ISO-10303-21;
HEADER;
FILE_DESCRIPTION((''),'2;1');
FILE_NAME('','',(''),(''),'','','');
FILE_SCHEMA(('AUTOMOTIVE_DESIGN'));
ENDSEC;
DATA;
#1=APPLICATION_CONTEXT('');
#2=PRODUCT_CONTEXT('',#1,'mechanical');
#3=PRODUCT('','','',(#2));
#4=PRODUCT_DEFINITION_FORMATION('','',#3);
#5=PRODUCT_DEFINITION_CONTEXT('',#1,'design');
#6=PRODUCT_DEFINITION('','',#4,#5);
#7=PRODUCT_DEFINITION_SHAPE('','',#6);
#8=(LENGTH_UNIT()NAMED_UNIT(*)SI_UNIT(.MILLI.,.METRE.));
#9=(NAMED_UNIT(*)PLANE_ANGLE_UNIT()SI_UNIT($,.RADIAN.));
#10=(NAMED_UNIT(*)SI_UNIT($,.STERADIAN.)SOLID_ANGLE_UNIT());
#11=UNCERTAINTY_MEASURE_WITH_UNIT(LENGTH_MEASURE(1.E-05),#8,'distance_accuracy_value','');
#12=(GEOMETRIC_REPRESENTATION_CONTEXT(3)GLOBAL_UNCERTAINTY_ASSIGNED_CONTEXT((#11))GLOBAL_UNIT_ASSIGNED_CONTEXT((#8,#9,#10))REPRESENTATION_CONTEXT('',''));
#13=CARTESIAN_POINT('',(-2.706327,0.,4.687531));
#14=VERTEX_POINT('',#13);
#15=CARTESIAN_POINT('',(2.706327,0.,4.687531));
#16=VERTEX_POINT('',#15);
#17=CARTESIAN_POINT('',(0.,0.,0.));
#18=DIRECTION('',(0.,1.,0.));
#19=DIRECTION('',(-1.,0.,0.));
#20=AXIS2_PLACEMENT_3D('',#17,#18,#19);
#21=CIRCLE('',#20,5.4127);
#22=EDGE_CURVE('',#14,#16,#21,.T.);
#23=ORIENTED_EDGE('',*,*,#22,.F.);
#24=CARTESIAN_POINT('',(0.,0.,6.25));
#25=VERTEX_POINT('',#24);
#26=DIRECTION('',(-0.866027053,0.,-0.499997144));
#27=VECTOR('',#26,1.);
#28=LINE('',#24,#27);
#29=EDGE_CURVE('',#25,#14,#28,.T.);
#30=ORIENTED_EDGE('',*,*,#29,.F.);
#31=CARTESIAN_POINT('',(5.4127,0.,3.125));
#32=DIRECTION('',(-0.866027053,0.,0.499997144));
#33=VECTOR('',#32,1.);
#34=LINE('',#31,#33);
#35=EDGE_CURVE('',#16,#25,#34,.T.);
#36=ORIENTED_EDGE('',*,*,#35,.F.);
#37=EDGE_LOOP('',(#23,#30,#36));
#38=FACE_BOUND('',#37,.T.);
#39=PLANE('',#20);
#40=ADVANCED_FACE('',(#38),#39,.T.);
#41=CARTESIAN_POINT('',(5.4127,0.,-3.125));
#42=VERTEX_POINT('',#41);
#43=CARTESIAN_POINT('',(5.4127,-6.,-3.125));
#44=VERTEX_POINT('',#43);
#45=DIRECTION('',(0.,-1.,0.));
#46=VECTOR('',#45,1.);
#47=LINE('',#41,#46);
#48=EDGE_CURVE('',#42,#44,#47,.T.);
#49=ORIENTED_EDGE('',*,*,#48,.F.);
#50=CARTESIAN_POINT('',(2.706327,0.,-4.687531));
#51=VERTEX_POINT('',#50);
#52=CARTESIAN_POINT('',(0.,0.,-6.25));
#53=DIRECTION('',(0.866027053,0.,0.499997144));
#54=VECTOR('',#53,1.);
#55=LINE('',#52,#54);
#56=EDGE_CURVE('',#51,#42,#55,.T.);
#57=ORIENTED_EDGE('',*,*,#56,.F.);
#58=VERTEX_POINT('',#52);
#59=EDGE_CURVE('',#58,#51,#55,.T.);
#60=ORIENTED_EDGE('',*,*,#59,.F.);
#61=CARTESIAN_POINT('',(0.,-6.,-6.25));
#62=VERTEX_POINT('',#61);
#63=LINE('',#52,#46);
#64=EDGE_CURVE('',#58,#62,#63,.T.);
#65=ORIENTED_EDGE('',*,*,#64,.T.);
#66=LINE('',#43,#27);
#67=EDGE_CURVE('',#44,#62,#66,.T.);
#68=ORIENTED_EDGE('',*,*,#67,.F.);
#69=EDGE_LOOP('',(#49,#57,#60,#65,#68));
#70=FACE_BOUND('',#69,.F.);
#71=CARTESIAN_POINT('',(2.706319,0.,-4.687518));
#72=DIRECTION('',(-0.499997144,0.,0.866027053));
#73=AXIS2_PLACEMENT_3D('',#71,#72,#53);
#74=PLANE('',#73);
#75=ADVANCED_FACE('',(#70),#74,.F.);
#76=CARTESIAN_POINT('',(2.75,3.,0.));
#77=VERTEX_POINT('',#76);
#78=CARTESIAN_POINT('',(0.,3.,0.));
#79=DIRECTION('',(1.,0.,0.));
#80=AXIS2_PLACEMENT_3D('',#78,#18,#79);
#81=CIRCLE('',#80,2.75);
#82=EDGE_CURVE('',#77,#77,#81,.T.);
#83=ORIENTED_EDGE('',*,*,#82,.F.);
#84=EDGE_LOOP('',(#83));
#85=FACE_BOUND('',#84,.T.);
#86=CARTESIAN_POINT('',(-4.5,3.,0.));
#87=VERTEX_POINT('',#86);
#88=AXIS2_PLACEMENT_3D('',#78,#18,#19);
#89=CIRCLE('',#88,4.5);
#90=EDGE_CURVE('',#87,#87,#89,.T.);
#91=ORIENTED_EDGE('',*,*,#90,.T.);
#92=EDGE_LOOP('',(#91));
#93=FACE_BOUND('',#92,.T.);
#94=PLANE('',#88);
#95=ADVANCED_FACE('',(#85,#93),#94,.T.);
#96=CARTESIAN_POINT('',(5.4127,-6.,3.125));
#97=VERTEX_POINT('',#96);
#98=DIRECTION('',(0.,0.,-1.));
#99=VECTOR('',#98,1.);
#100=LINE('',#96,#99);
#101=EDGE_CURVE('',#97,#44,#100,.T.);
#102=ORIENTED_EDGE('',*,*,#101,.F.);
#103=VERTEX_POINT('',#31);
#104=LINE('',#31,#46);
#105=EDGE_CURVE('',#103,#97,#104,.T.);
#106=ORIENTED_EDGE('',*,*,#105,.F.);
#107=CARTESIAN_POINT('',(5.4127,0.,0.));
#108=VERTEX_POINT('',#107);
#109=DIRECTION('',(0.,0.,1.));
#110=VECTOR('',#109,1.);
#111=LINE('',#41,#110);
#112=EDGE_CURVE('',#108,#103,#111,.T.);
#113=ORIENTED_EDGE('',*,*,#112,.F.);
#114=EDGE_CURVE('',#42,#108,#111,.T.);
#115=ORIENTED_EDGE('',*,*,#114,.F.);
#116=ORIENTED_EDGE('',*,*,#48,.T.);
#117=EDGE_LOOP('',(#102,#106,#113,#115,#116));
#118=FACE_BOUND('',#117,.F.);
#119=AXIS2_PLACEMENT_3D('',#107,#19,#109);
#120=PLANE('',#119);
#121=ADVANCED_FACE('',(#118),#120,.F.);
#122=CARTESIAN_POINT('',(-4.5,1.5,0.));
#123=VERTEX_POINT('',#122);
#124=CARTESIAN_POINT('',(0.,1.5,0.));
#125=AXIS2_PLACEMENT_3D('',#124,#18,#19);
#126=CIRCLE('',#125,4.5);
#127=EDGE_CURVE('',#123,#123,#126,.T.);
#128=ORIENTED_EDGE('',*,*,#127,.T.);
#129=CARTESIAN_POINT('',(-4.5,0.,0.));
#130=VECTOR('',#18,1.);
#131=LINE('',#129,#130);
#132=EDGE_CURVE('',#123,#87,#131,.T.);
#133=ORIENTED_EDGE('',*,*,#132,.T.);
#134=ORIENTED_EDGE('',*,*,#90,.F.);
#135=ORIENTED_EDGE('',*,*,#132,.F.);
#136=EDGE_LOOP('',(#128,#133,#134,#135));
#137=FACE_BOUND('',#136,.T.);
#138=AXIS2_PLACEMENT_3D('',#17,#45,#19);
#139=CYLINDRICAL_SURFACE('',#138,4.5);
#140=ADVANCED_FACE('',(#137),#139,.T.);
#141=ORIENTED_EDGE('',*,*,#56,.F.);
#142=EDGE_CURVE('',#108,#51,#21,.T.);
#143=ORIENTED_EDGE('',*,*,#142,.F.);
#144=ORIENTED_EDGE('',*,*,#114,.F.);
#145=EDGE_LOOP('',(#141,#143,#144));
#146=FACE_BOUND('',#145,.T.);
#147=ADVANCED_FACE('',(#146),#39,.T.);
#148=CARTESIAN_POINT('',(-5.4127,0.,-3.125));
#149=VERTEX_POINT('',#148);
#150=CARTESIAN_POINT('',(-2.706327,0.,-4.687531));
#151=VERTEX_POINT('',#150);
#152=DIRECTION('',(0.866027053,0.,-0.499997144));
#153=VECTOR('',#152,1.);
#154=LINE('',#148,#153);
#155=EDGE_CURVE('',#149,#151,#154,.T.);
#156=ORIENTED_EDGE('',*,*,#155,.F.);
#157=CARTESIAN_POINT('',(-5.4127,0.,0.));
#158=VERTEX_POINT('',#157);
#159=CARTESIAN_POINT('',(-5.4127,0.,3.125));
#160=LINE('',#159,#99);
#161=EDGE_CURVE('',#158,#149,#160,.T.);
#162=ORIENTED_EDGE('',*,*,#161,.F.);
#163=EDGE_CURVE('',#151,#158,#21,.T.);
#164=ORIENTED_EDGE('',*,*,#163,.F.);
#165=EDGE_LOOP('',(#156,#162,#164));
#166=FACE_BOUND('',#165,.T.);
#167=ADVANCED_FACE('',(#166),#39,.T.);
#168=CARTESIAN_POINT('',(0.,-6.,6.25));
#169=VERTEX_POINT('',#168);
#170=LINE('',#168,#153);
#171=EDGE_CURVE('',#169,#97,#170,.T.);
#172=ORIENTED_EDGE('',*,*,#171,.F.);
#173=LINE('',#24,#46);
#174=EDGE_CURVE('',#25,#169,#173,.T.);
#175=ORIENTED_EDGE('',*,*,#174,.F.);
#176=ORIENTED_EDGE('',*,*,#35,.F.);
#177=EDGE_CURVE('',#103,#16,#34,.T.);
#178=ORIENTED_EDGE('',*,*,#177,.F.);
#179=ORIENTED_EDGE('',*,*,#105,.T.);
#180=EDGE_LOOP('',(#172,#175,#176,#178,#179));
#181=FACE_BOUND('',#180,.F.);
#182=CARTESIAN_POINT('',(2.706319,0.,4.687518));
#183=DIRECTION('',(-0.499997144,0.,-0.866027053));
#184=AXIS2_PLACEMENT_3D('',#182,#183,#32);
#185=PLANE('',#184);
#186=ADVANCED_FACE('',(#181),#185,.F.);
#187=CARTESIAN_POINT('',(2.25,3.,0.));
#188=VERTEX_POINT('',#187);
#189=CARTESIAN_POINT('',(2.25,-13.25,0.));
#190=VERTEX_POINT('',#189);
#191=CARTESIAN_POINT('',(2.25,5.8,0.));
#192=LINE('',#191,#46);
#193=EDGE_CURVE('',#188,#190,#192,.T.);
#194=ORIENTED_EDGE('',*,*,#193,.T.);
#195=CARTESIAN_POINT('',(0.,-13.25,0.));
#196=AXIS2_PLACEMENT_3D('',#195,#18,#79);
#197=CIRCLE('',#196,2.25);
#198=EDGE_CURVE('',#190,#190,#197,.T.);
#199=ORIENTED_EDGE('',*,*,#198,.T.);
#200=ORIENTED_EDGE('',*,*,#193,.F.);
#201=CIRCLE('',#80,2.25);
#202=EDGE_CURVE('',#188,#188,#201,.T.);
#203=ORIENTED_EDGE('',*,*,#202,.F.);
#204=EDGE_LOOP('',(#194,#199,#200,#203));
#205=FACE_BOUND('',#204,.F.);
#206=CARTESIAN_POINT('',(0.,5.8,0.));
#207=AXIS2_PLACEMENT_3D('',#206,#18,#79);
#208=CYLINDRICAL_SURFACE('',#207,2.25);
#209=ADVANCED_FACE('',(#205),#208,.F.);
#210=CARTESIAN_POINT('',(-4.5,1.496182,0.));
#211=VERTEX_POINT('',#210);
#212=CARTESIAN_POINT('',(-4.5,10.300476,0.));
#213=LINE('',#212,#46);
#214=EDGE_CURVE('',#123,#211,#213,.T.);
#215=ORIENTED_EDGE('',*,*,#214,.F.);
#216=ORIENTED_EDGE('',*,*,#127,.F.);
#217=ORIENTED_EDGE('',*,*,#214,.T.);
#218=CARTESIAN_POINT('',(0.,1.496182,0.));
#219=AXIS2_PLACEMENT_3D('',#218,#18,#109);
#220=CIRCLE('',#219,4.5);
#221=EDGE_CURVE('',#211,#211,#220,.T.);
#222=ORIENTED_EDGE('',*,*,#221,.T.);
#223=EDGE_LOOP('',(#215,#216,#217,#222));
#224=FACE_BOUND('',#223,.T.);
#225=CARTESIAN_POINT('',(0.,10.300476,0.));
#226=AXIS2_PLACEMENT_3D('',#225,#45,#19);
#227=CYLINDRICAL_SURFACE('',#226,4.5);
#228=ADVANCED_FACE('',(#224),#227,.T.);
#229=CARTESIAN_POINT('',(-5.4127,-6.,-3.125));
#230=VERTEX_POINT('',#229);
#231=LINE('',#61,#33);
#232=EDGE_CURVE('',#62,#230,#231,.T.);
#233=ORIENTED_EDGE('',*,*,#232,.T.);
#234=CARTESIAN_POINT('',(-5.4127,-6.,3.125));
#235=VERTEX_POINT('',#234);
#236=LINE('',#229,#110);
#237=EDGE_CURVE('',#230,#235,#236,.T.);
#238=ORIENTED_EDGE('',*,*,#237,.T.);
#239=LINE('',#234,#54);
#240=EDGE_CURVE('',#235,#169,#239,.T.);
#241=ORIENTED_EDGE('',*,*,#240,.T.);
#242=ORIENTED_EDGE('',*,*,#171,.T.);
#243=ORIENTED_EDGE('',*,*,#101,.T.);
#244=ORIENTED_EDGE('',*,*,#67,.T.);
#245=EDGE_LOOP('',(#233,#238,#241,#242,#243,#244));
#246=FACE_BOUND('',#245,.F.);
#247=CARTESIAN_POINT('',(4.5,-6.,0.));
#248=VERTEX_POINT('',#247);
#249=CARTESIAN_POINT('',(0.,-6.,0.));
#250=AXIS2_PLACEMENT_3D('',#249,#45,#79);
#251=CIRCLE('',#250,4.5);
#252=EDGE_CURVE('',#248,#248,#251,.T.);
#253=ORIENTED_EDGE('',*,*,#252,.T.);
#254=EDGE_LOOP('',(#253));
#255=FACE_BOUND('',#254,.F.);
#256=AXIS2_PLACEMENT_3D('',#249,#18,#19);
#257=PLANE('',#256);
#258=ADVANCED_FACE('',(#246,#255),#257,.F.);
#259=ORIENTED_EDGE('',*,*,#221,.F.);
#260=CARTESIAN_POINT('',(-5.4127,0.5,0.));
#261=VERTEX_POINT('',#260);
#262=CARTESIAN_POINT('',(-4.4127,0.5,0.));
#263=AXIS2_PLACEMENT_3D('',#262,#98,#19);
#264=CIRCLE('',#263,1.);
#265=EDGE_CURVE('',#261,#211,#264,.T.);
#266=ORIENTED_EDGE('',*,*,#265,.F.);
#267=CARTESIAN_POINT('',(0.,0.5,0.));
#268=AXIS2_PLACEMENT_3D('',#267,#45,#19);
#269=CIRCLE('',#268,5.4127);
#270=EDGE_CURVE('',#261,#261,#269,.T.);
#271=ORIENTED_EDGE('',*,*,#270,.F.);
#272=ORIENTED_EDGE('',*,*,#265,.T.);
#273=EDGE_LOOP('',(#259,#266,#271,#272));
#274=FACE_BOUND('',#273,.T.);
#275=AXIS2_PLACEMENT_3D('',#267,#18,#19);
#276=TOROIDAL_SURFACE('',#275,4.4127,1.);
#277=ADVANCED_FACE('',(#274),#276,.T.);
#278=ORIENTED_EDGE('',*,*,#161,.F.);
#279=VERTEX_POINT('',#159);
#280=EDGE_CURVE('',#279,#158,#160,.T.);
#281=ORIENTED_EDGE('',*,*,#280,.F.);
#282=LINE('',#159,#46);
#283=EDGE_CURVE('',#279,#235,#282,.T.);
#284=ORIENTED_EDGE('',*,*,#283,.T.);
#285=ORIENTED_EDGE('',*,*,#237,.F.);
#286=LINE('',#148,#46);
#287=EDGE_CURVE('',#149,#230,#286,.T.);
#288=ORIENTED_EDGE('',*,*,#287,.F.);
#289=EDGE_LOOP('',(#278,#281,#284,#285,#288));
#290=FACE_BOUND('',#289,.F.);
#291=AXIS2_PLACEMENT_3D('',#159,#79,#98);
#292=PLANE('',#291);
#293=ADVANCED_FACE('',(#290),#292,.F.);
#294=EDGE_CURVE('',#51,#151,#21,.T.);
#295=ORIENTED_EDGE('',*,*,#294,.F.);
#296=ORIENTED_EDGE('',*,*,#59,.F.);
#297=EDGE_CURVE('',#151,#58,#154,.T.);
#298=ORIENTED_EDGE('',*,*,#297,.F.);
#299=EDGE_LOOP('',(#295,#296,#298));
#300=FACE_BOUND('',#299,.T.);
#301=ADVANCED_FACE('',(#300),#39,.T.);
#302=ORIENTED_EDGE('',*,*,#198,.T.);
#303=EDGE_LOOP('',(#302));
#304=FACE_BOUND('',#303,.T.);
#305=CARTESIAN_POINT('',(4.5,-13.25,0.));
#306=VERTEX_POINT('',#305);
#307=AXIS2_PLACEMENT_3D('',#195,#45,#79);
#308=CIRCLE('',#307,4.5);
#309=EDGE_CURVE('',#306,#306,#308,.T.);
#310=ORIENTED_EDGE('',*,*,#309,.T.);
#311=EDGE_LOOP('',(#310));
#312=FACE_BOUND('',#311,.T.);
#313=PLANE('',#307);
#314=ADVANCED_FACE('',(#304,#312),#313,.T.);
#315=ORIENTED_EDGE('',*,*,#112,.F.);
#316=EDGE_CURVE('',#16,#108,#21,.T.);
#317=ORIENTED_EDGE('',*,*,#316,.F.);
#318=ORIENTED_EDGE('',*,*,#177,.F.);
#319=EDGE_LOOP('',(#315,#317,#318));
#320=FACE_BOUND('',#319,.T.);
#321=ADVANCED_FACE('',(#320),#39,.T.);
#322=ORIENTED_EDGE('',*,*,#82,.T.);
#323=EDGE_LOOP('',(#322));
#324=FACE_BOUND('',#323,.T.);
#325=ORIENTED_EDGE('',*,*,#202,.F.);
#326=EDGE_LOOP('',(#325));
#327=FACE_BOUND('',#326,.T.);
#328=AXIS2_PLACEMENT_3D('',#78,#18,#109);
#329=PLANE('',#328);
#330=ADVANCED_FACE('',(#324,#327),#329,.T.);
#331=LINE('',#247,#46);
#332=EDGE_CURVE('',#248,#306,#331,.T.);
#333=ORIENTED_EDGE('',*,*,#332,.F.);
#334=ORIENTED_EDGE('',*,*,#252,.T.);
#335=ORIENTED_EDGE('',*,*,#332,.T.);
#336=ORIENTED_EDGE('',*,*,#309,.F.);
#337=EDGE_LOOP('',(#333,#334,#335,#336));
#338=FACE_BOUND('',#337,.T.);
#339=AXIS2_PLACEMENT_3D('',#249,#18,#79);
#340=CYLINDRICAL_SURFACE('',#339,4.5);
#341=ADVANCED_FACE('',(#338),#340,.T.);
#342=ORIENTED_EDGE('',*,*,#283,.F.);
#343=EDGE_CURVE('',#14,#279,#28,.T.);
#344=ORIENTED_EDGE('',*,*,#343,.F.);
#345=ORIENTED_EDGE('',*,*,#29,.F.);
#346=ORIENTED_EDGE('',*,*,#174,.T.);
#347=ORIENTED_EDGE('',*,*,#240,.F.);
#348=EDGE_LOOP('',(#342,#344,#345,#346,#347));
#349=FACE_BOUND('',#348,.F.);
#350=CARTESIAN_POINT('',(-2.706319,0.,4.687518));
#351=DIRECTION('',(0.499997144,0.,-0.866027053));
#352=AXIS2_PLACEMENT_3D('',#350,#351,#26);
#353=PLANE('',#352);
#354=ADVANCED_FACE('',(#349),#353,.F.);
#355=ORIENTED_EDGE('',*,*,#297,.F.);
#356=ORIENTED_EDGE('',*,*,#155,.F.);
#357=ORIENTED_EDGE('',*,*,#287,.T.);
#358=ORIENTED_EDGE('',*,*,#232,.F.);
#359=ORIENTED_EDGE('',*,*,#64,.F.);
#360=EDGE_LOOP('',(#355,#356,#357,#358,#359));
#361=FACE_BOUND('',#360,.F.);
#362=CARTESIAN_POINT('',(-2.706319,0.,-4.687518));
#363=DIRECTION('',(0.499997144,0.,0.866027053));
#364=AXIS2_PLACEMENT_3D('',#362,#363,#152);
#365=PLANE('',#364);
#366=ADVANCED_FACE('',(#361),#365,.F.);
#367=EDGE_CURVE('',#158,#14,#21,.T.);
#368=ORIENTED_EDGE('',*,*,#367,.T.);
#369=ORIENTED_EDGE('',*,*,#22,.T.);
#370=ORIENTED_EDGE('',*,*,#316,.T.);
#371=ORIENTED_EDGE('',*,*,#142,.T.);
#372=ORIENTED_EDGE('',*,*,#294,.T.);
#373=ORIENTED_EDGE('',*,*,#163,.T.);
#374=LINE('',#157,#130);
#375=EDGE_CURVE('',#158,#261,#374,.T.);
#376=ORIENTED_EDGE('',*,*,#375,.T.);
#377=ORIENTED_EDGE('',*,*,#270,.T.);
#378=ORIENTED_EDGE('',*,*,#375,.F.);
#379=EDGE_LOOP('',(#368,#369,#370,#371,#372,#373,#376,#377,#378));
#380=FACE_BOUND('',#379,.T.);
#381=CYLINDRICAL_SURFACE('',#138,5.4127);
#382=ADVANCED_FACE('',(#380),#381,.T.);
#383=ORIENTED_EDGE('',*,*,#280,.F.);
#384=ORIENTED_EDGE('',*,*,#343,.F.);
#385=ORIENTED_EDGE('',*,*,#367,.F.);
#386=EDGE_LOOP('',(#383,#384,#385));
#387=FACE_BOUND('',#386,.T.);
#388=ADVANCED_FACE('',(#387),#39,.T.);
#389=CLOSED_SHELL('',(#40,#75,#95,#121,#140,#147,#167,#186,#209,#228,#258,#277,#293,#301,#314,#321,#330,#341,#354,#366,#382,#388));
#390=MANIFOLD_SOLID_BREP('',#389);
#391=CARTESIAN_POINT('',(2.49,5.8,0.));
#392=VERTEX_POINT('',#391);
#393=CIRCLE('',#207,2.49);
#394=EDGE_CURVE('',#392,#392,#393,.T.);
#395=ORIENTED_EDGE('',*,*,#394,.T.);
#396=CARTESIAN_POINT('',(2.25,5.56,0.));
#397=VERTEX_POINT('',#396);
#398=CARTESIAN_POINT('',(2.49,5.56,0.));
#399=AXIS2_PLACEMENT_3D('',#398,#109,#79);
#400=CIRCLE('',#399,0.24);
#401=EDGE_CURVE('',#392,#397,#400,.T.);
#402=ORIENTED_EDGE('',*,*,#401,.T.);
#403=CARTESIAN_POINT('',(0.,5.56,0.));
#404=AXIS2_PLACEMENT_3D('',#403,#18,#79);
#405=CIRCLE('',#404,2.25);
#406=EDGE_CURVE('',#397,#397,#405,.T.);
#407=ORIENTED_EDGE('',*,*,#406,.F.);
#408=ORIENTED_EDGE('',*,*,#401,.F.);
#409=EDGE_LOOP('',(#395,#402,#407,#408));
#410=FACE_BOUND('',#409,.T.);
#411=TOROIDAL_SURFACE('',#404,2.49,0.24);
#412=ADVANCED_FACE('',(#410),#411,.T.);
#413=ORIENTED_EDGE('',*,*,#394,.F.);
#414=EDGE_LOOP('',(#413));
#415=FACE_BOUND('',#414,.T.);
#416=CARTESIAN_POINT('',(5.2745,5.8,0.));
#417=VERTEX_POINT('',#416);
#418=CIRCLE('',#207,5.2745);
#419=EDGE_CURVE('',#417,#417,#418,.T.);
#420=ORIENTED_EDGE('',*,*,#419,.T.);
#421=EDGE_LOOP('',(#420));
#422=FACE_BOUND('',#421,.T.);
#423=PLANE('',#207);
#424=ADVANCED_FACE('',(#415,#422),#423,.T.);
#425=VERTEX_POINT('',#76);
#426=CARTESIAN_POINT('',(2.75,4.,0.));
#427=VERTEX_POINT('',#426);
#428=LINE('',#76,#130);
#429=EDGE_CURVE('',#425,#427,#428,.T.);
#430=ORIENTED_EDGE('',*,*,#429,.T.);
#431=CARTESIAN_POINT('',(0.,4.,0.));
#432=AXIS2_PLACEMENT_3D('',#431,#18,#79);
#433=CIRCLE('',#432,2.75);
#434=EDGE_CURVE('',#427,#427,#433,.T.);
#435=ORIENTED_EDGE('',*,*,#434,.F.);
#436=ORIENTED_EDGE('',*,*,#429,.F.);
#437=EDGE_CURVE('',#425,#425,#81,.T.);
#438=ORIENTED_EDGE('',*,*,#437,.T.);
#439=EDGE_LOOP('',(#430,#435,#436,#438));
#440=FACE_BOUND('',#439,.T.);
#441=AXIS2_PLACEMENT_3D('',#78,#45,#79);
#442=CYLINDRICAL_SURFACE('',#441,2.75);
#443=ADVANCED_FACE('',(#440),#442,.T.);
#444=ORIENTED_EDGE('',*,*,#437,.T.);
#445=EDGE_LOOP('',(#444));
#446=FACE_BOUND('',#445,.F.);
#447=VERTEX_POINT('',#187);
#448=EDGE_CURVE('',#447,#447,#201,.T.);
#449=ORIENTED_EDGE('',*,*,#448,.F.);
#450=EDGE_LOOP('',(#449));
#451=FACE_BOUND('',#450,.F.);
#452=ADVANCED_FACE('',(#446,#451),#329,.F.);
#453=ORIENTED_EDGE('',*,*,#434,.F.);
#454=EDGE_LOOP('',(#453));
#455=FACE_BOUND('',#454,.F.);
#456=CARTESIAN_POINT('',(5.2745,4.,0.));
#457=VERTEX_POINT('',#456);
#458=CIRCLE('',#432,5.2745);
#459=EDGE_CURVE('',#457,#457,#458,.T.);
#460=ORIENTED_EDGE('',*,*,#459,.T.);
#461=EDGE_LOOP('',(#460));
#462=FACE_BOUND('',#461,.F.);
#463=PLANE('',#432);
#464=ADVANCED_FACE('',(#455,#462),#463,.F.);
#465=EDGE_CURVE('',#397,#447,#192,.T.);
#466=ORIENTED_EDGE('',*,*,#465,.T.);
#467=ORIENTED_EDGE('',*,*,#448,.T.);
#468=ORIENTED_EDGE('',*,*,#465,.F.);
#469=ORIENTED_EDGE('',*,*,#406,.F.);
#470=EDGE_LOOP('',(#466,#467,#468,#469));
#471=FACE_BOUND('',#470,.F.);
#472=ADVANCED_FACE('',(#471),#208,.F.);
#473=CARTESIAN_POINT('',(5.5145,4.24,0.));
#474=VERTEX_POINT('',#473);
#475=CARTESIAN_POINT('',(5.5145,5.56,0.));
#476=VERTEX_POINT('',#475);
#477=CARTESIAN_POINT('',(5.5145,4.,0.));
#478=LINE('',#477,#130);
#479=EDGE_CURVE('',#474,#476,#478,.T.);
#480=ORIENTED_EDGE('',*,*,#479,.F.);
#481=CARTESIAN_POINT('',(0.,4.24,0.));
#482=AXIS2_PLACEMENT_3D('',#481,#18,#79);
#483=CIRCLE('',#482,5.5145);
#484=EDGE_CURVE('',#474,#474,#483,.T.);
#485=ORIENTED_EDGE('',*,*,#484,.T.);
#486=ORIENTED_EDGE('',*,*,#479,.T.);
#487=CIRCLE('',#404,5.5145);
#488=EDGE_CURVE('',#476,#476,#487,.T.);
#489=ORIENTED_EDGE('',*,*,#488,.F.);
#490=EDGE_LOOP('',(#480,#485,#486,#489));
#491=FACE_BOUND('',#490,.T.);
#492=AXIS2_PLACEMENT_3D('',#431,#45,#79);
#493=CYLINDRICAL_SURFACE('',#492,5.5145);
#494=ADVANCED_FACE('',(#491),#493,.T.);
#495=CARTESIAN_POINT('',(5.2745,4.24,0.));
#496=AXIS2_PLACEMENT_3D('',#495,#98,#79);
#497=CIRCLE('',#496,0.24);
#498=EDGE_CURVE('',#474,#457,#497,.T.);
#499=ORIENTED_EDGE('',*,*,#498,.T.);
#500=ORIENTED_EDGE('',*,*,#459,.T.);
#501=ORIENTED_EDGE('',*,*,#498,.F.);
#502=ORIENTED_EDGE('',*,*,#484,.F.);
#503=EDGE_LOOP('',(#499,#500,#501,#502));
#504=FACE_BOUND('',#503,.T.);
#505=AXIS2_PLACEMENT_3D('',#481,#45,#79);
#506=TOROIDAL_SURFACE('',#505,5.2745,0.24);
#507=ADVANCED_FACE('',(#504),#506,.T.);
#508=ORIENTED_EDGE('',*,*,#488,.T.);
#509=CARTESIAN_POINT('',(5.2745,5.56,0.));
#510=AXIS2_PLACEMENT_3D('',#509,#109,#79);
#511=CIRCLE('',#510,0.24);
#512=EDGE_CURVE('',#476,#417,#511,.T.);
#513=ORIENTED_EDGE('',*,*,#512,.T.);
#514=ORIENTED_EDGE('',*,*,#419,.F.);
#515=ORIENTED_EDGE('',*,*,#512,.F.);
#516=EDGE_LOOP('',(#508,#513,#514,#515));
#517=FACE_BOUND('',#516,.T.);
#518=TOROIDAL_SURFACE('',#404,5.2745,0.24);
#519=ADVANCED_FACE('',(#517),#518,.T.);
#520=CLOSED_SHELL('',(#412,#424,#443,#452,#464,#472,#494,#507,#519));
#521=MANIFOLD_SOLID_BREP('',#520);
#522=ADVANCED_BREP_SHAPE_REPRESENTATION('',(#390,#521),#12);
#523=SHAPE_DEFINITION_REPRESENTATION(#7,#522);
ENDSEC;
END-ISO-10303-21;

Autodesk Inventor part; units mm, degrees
ref_plane "YZ Plane" through (0, 0, 0) normal (1, 0, 0) x (0, 1, 0)
ref_plane "XZ Plane" through (0, 0, 0) normal (0, 1, 0) x (-1, 0, 0)
ref_plane "XY Plane" through (0, 0, 0) normal (0, 0, 1) x (1, 0, 0)
sketch "Sketch1" plane through (0, 0, 0) normal (0, 1, 0) x (-1, 0, 0)
  line L0 (0, 0) -> (0, -6.25) construction
  line L1 (0, -6.25) -> (-5.4127, -3.125) construction
  line L2 (-5.4127, -3.125) -> (-5.4127, 3.125) construction
  line L3 (-5.4127, 3.125) -> (0, 6.25) construction
  line L4 (0, 6.25) -> (5.4127, 3.125) construction
  line L5 (5.4127, 3.125) -> (5.4127, -3.125) construction
  line L6 (5.4127, -3.125) -> (0, -6.25) construction
  line L7 (5.4127, 3.125) -> (5.4127, -3.125)
  line L8 (5.4127, -3.125) -> (0, -6.25)
  line L9 (0, -6.25) -> (-5.4127, -3.125)
  line L10 (-5.4127, -3.125) -> (-5.4127, 3.125)
  line L11 (-5.4127, 3.125) -> (0, 6.25)
  line L12 (0, 6.25) -> (5.4127, 3.125)
  circle A0 centre (0, 0) radius 4.5
  circle A1 centre (0, 0) radius 5.4127
  circle A2 centre (0, 0) radius 4
  dimension "d0" = 6.25
  dimension "d1" = 9
  dimension "d2" = 8
extrude "Extrusion1" add sketch "Sketch1" along normal blind 3 contours A0 | A2
extrude "Extrusion2" add sketch "Sketch1" along normal blind 1.5 contours A1
extrude "Extrusion3" add sketch "Sketch1" against normal blind 6 contours L7 A1 L12 | A1 | L7 L8 A1 | A1 L11 L12 | L8 L9 A1 | A1 L10 L11 | L9 L10 A1 | A0 | A2
fillet "Fillet1" radius 1 1 edges at (5.4127, 1.5, 0)
sketch "Sketch2" plane through (0, -6, 0) normal (0, -1, 0) x (1, 0, 0)
  circle A0 centre (0, 0) radius 4.5
  dimension "d10" = 9
extrude "Extrusion4" add sketch "Sketch2" along normal blind 7.25
thread "Thread1" size "M9x1" class "6g" standard "ANSI Metric M Profile" length 7.25
sketch "Sketch3" plane through (0, 3, 0) normal (0, 1, 0) x (1, 0, 0)
  circle A0 centre (0, 0) radius 2.75
  dimension "d15" = 5.5
extrude "Extrusion5" add sketch "Sketch3" along normal blind 1
sketch "Sketch4" plane through (0, 4, 0) normal (0, 1, 0) x (1, 0, 0)
  circle A0 centre (0, 0) radius 5.5145
extrude "Extrusion6" add sketch "Sketch4" along normal blind 1.8
sketch "Sketch5" plane through (0, 5.8, 0) normal (0, 1, 0) x (1, 0, 0)
  circle A0 centre (0, 0) radius 2.25
  dimension "d20" = 4.5
extrude "Extrusion7" cut sketch "Sketch5" against normal blind 20
fillet "Fillet2" radius 0.24 3 edges at (-5.5145, 5.8, 0) (-5.5145, 4, 0) (-2.25, 5.8, 0)
ref_plane "Work Plane1" through (0, 3, 0) normal (0, 1, 0) x (1, 0, 0)
split body "Split1" result two bodies by plane through (0, 3, 0) normal (0, 1, 0) first body at (4.2712, 5.3, 0.6194)
properties part number "bowden-adapter-coldend" material "Aluminum 6061"
